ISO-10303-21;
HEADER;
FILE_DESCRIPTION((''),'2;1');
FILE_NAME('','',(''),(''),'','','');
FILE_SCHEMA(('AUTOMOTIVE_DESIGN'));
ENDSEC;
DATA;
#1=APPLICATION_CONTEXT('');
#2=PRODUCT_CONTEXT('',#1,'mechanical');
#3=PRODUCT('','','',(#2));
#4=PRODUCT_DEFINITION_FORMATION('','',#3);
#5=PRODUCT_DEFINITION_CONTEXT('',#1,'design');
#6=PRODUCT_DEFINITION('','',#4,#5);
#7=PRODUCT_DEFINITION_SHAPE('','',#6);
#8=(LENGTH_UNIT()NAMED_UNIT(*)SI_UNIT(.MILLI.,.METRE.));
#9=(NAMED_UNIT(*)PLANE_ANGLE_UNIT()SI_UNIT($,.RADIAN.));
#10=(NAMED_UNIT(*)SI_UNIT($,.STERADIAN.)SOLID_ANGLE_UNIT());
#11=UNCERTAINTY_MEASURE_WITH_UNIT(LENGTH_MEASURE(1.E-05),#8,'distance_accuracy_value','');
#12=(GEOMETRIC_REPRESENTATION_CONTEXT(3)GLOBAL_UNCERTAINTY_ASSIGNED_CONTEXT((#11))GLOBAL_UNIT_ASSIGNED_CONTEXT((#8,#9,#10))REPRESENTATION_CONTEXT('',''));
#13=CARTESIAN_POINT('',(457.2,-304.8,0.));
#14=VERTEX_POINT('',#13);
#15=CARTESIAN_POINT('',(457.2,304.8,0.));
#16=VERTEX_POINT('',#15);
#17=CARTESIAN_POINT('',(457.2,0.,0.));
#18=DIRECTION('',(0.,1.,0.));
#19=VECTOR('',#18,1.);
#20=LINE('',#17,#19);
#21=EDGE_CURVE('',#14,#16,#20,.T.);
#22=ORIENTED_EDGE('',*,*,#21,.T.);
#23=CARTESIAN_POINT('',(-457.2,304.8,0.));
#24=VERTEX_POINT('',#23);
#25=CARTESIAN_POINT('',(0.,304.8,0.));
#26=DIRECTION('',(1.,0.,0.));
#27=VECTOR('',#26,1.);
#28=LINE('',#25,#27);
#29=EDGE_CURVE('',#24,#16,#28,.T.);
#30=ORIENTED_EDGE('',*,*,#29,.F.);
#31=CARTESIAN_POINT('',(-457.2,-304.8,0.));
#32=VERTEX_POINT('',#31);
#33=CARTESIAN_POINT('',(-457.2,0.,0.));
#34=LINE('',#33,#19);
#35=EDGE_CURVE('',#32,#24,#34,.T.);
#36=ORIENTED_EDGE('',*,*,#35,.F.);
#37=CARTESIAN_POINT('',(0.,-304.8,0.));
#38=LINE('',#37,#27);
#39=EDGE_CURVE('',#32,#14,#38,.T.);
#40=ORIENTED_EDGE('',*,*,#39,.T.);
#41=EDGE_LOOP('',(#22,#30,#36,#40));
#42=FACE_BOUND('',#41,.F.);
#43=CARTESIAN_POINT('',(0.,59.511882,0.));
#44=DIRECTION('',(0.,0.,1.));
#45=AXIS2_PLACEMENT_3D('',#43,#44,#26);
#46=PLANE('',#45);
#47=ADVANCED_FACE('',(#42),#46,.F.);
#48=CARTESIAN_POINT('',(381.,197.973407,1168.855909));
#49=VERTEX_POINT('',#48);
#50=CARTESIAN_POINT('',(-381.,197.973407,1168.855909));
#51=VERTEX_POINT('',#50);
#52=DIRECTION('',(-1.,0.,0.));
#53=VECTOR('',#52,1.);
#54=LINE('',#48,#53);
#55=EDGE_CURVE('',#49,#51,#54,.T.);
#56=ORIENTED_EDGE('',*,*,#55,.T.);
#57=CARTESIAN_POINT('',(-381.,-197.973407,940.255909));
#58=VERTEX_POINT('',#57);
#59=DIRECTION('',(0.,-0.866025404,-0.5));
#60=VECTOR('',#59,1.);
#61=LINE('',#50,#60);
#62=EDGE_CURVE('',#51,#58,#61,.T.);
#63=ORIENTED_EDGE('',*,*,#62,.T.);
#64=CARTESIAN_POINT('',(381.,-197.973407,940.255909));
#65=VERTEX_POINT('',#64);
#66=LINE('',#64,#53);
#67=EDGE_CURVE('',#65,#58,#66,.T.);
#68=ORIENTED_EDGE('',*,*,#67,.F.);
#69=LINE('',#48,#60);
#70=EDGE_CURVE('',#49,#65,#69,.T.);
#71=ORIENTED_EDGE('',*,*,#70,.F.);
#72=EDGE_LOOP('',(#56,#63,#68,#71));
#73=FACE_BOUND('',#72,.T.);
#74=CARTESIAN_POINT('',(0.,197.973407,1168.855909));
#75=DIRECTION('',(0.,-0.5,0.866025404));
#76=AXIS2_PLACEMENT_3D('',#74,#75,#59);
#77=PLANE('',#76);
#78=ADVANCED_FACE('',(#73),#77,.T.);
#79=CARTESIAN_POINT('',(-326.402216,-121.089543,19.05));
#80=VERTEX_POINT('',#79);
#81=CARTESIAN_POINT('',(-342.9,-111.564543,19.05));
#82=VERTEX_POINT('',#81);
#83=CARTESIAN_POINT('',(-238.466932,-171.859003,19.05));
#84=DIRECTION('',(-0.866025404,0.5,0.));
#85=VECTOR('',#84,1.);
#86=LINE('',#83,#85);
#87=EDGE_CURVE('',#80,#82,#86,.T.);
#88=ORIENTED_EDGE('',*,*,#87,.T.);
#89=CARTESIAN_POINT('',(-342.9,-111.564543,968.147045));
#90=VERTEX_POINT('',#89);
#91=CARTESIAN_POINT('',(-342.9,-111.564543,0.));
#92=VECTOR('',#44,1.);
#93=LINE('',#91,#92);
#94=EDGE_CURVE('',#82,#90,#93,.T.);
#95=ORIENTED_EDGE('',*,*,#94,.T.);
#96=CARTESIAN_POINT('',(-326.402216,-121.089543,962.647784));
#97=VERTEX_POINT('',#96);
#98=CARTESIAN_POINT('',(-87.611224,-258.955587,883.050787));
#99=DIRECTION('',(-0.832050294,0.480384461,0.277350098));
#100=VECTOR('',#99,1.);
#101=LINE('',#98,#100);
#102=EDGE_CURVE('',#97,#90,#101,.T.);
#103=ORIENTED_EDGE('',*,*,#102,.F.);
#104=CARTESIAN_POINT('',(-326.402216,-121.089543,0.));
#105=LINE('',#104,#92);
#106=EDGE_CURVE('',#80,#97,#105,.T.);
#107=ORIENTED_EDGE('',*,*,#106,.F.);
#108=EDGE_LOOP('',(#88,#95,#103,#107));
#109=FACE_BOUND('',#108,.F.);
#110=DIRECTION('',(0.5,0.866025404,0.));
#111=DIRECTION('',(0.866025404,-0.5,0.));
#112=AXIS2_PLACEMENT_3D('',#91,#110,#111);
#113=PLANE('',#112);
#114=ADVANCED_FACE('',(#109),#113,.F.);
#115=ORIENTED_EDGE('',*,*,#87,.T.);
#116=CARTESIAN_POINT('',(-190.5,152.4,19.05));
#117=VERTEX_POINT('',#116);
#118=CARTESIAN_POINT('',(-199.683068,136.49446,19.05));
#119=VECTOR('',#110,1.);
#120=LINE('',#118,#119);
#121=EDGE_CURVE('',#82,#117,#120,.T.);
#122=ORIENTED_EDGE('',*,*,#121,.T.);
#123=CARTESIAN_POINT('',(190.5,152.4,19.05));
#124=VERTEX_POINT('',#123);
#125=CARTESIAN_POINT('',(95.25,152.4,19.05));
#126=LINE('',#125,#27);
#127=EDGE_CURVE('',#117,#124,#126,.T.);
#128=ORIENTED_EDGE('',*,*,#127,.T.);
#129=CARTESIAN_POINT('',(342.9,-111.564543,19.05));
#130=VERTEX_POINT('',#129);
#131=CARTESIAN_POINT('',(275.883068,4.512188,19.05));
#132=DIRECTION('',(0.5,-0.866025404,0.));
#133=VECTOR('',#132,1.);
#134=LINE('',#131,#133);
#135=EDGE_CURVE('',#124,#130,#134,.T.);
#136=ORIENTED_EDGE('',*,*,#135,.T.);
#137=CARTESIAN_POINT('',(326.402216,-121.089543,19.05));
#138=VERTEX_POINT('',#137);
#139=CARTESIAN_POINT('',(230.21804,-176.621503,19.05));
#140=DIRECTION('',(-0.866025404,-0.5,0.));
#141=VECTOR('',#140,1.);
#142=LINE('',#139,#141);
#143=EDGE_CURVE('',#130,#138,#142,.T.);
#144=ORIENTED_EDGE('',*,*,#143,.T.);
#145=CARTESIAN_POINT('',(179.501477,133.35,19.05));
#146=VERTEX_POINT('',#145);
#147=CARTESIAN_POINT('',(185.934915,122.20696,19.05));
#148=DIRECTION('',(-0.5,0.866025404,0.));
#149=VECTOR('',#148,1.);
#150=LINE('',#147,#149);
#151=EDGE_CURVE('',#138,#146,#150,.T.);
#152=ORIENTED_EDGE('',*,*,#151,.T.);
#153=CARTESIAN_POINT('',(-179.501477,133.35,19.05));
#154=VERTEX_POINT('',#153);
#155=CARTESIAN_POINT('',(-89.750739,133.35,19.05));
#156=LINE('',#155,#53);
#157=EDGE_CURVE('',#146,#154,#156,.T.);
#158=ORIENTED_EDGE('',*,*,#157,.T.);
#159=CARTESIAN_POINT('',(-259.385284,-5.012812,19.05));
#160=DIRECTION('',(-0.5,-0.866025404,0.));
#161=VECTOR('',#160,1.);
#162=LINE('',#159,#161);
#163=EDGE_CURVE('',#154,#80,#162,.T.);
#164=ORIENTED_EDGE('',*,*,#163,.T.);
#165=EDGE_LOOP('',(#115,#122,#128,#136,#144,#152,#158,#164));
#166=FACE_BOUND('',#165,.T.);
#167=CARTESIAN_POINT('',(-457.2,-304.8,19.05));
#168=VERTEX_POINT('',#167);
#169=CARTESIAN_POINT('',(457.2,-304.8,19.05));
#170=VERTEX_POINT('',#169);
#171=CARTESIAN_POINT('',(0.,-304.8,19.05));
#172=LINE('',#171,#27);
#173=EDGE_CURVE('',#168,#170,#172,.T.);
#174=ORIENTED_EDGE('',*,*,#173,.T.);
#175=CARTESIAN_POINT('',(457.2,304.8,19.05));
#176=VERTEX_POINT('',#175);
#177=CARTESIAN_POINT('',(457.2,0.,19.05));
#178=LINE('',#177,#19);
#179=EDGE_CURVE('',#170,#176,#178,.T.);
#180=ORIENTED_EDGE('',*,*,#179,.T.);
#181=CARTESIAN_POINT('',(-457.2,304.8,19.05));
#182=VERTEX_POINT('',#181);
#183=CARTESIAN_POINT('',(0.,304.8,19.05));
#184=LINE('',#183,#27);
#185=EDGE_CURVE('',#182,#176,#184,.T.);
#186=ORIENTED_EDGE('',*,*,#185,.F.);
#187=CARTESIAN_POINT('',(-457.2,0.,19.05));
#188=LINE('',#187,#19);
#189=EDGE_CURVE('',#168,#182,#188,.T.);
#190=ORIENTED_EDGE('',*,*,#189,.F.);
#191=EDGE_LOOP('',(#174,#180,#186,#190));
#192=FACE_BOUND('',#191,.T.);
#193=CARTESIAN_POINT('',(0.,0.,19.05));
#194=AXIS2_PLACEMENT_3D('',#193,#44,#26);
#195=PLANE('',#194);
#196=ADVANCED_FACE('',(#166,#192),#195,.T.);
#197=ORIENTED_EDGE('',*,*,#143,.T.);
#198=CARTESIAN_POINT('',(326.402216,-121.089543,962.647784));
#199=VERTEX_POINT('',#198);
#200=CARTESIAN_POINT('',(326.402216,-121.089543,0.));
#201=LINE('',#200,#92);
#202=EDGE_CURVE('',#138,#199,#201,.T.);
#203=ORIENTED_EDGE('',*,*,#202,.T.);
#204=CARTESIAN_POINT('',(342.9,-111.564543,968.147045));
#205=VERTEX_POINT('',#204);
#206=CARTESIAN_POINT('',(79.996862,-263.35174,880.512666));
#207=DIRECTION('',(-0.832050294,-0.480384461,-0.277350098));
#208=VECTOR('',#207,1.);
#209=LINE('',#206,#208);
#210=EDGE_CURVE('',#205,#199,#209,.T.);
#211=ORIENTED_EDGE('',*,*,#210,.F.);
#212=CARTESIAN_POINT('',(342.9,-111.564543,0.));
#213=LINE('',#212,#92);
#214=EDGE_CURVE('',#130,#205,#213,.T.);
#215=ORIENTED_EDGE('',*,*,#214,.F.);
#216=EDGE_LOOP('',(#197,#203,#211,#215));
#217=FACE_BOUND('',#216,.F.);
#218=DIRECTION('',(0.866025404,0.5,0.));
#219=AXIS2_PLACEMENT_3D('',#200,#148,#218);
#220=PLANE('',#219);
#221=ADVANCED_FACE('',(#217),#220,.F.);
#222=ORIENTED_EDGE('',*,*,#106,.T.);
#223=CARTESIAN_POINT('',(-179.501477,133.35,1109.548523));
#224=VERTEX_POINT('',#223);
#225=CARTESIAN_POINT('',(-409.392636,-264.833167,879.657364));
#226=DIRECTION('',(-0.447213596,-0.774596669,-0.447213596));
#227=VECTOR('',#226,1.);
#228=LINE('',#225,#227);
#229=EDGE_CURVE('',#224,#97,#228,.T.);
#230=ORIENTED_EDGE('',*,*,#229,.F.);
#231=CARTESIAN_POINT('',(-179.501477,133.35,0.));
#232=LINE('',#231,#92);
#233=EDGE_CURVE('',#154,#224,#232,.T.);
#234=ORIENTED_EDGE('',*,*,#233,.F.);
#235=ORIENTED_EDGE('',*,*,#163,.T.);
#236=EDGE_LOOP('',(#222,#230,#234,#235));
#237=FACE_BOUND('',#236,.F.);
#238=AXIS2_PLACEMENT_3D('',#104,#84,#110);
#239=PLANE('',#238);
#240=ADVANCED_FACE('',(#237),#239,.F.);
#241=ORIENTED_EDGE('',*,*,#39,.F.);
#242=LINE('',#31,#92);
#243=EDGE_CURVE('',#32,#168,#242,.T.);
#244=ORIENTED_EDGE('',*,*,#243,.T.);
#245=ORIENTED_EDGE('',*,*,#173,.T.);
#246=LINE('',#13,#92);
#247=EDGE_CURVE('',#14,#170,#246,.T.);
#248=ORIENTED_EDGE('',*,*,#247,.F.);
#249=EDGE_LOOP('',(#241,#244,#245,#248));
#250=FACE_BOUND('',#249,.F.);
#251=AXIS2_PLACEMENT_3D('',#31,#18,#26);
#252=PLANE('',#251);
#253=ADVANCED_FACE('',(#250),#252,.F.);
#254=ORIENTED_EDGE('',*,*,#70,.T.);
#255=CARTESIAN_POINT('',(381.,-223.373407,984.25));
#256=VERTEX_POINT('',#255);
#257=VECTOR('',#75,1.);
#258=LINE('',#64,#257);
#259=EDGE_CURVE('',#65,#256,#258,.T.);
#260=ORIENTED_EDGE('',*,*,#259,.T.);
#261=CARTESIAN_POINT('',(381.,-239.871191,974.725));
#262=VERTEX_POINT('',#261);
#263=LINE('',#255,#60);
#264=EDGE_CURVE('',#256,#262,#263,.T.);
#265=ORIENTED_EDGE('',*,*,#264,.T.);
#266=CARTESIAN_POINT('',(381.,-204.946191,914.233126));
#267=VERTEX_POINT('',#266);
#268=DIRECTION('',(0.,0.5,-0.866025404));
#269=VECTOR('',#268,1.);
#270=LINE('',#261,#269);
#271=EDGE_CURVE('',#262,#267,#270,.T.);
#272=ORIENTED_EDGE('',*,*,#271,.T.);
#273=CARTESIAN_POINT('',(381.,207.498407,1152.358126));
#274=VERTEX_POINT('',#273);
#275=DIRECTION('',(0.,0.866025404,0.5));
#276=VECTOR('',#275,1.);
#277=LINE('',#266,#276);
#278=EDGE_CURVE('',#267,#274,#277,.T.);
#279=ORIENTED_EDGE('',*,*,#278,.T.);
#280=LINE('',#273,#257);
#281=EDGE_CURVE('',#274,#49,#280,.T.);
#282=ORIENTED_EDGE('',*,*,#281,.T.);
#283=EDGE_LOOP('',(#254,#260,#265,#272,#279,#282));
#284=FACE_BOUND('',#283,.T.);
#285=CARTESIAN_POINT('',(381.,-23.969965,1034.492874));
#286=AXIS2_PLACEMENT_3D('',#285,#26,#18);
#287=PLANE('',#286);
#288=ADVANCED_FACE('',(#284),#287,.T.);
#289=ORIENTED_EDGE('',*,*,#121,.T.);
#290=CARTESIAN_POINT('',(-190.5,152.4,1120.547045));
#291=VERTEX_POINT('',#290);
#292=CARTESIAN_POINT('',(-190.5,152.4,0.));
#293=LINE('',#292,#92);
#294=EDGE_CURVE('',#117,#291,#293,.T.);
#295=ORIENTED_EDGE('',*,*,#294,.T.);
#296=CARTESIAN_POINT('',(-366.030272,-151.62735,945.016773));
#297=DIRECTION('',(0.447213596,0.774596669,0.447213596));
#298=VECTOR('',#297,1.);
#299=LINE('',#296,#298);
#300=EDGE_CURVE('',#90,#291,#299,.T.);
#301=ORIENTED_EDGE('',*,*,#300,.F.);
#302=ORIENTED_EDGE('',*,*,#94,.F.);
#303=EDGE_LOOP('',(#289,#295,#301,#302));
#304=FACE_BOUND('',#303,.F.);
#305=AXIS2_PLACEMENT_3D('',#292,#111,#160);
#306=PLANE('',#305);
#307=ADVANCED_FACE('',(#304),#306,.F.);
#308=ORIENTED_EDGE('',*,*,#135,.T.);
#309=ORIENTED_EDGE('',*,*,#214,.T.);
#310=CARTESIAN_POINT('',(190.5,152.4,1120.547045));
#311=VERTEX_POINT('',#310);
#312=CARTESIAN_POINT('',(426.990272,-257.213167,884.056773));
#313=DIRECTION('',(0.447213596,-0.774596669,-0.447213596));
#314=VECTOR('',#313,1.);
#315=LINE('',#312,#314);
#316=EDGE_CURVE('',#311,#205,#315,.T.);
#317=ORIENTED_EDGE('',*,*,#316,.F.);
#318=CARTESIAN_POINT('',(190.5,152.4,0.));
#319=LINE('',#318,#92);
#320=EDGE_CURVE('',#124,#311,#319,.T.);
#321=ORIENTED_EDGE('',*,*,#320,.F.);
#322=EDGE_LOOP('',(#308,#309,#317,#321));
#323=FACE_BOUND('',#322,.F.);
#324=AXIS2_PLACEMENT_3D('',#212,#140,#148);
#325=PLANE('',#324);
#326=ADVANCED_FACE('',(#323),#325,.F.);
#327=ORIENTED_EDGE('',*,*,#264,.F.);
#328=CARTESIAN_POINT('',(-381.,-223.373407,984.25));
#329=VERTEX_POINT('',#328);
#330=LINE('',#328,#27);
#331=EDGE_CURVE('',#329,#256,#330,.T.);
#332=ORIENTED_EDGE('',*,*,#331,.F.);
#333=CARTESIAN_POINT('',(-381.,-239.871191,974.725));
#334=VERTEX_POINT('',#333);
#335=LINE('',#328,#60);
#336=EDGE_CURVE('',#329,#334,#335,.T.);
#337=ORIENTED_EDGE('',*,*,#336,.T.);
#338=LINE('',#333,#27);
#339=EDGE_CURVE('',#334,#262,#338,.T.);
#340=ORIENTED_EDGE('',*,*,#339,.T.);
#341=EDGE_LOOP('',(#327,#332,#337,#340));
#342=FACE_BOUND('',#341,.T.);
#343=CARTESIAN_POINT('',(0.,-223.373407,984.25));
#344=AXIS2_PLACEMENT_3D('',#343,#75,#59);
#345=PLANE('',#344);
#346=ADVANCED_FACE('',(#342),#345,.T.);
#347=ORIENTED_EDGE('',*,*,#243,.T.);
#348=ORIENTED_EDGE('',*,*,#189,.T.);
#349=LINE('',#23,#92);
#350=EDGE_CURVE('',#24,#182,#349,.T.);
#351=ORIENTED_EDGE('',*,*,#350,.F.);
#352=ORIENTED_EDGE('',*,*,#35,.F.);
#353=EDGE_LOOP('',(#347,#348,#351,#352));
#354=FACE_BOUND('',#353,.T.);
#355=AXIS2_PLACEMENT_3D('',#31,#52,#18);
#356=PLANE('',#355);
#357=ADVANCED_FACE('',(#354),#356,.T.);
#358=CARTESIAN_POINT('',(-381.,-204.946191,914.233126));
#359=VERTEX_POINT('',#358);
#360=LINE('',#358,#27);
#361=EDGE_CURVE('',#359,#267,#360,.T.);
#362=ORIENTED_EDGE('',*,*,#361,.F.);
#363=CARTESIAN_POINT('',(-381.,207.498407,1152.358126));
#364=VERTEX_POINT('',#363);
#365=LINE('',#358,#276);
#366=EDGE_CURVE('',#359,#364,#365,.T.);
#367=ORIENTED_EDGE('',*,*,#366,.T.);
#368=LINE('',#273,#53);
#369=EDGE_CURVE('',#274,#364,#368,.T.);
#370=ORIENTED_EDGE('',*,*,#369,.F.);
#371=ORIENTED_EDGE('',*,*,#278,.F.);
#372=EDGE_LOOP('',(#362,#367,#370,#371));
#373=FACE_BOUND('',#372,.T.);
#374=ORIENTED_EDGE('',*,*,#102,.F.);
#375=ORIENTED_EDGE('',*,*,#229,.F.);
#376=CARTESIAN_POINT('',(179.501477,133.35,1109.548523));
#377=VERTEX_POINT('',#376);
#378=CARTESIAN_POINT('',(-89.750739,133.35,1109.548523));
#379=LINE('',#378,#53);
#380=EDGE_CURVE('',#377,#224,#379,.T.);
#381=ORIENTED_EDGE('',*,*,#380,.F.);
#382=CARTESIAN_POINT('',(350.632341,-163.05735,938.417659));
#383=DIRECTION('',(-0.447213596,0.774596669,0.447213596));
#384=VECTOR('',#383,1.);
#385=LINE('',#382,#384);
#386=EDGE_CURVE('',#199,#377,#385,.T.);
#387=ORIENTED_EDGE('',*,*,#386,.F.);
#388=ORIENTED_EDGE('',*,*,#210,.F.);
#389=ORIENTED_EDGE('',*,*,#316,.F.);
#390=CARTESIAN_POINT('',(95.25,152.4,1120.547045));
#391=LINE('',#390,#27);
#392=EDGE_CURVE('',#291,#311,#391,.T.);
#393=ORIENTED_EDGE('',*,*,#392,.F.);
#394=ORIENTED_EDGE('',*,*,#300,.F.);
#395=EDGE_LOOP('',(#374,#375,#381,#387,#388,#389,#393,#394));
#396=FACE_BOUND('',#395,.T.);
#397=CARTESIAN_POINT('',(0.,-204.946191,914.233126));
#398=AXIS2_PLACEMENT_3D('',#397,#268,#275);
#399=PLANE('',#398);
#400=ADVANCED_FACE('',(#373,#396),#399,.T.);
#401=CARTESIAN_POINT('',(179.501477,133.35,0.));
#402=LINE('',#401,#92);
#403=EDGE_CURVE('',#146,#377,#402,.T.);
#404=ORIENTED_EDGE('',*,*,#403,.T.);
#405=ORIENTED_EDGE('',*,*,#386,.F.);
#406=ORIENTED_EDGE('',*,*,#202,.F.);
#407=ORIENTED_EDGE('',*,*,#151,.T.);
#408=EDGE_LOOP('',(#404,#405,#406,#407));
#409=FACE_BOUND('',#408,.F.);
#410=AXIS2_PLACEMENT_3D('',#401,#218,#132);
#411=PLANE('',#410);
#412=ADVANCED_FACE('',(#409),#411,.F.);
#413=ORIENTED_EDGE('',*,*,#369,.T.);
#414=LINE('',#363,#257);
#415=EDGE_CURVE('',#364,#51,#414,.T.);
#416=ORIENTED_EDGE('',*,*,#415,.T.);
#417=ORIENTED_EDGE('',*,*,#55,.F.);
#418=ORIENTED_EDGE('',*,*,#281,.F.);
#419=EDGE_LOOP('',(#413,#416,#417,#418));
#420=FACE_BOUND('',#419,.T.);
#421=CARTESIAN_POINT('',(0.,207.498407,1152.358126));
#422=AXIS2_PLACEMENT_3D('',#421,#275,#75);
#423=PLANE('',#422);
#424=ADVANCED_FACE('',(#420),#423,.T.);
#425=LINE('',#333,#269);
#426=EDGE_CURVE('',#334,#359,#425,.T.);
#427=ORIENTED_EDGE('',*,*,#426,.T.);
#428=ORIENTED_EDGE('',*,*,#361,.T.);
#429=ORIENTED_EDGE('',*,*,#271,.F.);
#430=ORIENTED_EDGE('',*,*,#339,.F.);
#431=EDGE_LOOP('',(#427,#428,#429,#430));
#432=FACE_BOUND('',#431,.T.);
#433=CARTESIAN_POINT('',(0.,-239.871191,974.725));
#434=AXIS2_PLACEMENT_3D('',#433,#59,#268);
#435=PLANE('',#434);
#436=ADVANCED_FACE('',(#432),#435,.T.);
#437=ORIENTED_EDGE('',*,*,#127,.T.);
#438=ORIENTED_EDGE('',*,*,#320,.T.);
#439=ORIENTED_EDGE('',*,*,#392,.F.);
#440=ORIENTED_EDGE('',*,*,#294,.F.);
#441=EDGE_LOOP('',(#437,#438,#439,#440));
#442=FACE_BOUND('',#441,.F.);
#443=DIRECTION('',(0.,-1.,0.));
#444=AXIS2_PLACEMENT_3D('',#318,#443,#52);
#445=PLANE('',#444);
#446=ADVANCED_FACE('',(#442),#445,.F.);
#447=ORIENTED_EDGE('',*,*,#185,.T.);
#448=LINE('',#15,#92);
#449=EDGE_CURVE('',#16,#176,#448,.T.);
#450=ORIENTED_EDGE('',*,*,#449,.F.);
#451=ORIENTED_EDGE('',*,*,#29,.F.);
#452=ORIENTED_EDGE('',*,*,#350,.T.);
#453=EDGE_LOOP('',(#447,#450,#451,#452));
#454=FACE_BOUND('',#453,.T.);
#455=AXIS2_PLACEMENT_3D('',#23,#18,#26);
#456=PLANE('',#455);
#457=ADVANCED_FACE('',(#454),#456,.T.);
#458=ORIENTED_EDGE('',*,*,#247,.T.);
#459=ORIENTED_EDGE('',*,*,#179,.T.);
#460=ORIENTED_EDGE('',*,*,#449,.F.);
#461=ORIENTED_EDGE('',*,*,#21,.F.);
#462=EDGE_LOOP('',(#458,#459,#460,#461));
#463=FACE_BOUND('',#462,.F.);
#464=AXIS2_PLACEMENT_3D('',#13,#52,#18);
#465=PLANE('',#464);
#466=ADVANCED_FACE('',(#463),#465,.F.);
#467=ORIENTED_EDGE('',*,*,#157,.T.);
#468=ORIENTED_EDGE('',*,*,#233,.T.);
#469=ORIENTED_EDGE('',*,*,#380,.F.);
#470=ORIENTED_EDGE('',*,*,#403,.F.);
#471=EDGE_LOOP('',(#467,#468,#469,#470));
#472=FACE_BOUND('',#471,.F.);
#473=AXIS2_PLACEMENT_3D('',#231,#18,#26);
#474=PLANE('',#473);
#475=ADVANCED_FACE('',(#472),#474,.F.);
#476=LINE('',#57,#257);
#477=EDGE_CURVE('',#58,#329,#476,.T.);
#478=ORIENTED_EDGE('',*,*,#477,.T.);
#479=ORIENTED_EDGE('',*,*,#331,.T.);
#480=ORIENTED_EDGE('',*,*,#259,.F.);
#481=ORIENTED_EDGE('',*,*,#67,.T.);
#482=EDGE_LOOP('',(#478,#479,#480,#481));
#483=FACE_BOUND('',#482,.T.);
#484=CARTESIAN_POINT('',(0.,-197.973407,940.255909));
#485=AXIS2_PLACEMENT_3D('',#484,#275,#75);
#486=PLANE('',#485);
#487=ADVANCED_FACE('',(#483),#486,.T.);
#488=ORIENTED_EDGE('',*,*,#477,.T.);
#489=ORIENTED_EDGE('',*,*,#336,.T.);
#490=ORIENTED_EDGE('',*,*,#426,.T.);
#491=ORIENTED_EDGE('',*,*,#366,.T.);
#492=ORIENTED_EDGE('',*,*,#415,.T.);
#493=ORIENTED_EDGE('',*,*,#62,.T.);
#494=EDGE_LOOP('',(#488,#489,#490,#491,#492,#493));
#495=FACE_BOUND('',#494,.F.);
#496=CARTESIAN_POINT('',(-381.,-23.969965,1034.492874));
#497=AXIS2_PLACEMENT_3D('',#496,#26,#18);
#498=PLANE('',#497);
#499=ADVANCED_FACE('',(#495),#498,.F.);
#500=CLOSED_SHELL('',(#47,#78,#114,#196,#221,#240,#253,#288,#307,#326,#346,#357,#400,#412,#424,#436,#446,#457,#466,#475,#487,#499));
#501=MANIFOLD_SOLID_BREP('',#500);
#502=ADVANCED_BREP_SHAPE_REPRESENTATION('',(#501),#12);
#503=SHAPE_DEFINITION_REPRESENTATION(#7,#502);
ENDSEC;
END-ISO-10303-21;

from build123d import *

# Parameters (mm, degrees)
F2_DEPTH = 381
F0_W     = 914.4
F0_H     = 609.6
F3_DEPTH = 19.05
F4_REACH = 1907.1780931


with BuildPart() as f2:
    # F1 (on Right) → F2 (new body, symmetric)
    with BuildSketch(Plane.YZ):
        Polygon((-197.9734073051, 940.2559094878), (-223.3734073051, 984.25), (-239.8711912472, 974.725), (-204.9461912472, 914.2331255457), (207.4984073051, 1152.3581255457), (197.9734073051, 1168.8559094878), align=None)
    extrude(amount=F2_DEPTH, both=True)



with BuildPart() as f3:
    # F0 (on Top) → F3 (new body)
    with BuildSketch(Plane.XY):
        Rectangle(F0_W, F0_H)
        Polygon((-342.9, -111.5645430735), (-190.5, 152.4), (190.5, 152.4), (342.9, -111.5645430735), (326.4022160579, -121.0895430735), (179.5014773719, 133.35), (-179.5014773719, 133.35), (-326.4022160579, -121.0895430735), align=None, mode=Mode.SUBTRACT)
        Polygon((190.5, 152.4), (-190.5, 152.4), (-342.9, -111.5645430735), (-326.4022160579, -121.0895430735), (-179.5014773719, 133.35), (179.5014773719, 133.35), (326.4022160579, -121.0895430735), (342.9, -111.5645430735), align=None)
    extrude(amount=F3_DEPTH)


with BuildPart() as f2_1:
    add(f2.part)

    add(f3.part)  # F4 merges F3
    f4_end = f2_1.faces().sort_by_distance((0, 1.276108029, 1033.2956255457))[0]
    # F0 (on Top) → F4 (join, up to a face of the model that its end follows)
    with BuildSketch(Plane.XY):
        Polygon((190.5, 152.4), (-190.5, 152.4), (-342.9, -111.5645430735), (-326.4022160579, -121.0895430735), (-179.5014773719, 133.35), (179.5014773719, 133.35), (326.4022160579, -121.0895430735), (342.9, -111.5645430735), align=None)
    f4_long = extrude(amount=F4_REACH, mode=Mode.PRIVATE)
    add(split(f4_long, bisect_by=f4_end, keep=Keep.TOP, mode=Mode.PRIVATE))


solid = f2_1.part
